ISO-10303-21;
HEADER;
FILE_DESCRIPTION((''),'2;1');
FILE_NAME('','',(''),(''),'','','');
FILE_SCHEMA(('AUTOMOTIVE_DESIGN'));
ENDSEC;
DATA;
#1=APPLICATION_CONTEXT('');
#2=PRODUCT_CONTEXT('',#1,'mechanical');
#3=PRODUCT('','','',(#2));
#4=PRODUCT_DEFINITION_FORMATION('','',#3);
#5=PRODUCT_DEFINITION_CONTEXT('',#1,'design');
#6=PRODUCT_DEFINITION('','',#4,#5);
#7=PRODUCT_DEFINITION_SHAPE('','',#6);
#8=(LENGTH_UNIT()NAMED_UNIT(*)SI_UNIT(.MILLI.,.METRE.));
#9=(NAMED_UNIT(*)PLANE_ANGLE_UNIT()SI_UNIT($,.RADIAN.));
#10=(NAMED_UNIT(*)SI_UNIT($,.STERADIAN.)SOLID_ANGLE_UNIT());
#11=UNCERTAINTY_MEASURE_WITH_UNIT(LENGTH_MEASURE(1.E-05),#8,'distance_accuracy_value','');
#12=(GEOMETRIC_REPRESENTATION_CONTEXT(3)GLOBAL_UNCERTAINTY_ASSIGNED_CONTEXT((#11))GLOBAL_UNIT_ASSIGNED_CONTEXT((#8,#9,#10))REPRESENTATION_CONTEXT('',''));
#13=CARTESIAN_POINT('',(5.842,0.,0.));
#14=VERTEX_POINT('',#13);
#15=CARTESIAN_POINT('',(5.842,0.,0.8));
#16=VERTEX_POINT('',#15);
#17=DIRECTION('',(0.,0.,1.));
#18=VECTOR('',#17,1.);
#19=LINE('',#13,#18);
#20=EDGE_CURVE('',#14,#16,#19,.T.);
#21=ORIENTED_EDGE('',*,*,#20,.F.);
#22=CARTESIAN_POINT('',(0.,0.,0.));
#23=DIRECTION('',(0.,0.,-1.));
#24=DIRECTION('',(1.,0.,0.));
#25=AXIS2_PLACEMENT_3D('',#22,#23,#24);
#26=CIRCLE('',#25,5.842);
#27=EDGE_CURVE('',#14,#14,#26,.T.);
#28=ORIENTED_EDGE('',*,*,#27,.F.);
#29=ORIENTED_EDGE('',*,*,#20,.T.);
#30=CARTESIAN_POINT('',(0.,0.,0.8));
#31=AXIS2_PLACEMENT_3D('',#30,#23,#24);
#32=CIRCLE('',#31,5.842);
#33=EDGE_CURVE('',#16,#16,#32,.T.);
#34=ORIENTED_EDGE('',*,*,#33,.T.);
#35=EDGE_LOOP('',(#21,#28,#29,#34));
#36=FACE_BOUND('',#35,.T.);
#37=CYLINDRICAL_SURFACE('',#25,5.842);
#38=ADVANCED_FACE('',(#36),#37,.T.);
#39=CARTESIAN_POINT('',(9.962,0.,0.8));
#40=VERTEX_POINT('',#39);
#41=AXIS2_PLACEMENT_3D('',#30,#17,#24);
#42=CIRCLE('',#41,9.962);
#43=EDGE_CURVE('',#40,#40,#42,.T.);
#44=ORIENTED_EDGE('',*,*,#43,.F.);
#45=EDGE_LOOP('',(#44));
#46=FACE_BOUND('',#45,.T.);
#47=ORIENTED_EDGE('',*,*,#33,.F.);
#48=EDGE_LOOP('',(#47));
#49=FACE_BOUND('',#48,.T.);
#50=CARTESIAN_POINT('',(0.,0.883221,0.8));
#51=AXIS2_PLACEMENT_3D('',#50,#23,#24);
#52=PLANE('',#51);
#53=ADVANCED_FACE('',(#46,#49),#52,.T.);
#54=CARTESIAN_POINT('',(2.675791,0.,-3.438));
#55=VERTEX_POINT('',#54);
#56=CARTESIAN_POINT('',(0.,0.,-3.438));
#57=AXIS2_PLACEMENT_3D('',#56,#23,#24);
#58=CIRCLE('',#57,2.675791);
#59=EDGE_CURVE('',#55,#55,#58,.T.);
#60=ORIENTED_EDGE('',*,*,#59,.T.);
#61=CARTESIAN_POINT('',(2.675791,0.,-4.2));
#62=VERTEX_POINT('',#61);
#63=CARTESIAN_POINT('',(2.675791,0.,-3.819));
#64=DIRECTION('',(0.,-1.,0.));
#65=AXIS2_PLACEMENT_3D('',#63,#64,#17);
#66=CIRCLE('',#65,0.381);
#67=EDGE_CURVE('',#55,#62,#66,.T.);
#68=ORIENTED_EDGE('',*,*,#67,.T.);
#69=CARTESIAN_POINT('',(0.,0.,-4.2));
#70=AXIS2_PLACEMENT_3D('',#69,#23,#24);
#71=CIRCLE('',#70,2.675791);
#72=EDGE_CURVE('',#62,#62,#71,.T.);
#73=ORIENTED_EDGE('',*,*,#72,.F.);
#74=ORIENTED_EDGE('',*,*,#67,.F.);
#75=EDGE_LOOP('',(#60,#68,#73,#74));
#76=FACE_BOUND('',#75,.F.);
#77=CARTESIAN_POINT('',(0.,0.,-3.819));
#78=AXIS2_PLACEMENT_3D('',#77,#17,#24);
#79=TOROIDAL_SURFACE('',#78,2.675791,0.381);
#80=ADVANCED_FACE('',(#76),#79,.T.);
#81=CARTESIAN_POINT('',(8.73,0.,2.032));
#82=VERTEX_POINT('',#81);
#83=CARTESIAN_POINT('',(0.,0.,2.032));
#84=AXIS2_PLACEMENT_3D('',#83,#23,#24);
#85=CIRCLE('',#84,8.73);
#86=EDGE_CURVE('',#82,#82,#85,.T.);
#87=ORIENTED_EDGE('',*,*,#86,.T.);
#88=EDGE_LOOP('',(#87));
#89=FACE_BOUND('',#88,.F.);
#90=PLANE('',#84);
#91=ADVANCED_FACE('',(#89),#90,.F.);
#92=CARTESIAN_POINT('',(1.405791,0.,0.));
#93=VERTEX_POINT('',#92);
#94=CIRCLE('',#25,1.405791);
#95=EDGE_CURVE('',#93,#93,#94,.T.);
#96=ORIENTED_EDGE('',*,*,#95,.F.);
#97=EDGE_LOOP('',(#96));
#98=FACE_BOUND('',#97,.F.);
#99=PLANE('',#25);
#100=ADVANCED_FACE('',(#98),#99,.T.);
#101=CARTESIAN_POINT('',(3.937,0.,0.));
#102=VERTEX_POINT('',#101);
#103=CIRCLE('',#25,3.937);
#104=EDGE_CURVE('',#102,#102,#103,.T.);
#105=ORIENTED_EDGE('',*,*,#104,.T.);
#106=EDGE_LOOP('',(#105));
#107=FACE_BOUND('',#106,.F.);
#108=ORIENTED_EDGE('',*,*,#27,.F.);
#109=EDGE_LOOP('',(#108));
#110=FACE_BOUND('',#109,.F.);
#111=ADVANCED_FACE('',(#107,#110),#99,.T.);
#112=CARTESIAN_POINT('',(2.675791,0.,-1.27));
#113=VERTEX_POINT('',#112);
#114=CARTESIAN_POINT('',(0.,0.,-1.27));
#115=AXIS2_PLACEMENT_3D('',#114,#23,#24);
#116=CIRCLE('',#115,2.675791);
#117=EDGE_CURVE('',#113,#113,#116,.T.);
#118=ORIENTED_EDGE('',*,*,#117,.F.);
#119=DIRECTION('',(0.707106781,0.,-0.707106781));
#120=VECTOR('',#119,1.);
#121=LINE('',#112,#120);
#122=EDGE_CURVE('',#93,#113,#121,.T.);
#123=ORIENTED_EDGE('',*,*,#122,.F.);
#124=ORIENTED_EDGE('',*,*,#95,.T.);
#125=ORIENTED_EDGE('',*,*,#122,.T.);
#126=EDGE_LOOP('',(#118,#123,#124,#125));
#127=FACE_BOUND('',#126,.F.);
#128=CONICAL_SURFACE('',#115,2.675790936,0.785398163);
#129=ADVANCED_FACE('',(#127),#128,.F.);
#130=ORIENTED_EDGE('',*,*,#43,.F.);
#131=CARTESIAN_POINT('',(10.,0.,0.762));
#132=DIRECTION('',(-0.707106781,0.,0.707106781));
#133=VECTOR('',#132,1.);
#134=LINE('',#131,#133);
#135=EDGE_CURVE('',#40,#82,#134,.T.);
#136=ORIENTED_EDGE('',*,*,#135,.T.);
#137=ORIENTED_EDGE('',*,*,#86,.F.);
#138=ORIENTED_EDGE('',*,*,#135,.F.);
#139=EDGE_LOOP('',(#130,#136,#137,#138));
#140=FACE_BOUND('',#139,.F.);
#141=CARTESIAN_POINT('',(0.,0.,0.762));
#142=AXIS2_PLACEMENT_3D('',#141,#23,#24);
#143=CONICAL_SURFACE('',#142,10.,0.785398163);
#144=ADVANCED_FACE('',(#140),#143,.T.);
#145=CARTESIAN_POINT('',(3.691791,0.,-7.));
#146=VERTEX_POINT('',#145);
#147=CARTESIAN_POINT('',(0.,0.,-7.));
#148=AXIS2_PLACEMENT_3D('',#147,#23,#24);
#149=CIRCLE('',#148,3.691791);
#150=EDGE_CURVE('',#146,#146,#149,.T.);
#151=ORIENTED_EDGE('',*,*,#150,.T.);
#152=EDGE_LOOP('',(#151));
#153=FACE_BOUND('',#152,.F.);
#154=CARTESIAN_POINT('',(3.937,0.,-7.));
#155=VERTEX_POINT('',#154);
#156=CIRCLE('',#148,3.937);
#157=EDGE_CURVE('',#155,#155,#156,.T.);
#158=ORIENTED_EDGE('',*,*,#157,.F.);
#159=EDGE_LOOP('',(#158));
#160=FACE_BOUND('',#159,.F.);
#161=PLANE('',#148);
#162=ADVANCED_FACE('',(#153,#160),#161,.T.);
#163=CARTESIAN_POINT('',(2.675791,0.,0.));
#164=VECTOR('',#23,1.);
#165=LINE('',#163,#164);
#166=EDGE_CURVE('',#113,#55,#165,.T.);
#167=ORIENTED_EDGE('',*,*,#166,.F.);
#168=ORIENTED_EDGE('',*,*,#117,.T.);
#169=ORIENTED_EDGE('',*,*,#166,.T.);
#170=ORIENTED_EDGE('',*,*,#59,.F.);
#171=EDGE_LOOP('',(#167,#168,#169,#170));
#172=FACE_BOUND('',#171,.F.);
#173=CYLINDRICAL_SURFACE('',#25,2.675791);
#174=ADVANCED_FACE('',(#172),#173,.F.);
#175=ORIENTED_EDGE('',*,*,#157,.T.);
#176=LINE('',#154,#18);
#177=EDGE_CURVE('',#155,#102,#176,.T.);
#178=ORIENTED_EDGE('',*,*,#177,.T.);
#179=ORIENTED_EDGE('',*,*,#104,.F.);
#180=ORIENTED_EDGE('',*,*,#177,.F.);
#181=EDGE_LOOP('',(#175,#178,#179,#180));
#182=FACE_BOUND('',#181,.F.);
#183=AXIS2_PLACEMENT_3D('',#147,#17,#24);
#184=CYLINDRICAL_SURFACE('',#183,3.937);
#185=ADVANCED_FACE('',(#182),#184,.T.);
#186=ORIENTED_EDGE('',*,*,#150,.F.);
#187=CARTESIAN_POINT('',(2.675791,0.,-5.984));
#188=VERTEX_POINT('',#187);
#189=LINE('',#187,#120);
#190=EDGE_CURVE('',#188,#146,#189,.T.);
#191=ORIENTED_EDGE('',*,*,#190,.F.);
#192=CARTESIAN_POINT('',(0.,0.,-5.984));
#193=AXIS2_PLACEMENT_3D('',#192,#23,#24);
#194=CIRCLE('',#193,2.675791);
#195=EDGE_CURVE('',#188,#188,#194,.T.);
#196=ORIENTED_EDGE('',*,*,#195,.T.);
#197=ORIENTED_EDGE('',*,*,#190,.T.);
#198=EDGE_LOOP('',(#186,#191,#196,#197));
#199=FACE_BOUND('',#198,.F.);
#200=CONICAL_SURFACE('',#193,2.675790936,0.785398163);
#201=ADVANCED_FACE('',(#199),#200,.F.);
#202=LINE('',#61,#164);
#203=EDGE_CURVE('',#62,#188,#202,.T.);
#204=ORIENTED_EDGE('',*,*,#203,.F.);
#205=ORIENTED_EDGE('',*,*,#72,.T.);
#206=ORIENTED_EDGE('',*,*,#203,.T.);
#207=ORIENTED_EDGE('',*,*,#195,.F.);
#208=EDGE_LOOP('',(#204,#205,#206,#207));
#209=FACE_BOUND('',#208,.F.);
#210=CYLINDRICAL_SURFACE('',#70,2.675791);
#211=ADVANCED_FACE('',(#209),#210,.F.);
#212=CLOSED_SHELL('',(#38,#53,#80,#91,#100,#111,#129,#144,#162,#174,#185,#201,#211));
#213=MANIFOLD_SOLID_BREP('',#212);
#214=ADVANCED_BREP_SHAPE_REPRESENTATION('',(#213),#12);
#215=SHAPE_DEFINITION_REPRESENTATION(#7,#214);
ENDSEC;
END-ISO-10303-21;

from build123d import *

# Parameters (mm, degrees)
F2_SIZE  = 1.27
F3_R     = 18.9556070846
F3_R_2   = 5.842
F4_DEPTH = 0.8
F5_SIZE  = 1.016


# Not quite as in the source:
# - a fillet or chamfer that OpenCascade refuses, or shapes differently, is made with other operations: its cross-section is extruded or revolved along the edge and cut away or added


with BuildPart() as f1:
    # F0 (on Front) → F1 (revolve)
    with BuildSketch(Plane.XZ):
        with BuildLine():
            Line((0, 0), (2.6757909362, 0))
            Line((2.6757909362, 0), (2.6757909362, -3.438))
            ThreePointArc((2.6757909362, -3.438), (2.2947909362, -3.819), (2.6757909362, -4.2))
            Line((2.6757909362, -4.2), (2.6757909362, -7))
            Line((2.6757909362, -7), (3.937, -7))
            Line((3.937, -7), (3.937, 0))
            Line((3.937, 0), (10, 0))
            Line((10, 0), (10, 2.032))
            Line((10, 2.032), (0, 2.032))
            Line((0, 2.032), (0, 0))
        make_face()
    revolve(axis=Axis((0, 0, 1.016), (0, 0, -1)))

    # F2
    f2_edges = [f1.edges().sort_by_distance(p)[0] for p in [
        (-2.675791, 0, 0),
    ]]
    chamfer(f2_edges, length=F2_SIZE)

    # F3 (on face) → F4 (cut)
    with BuildSketch(Plane(origin=(0, 0, 0), x_dir=(1, 0, 0), z_dir=(0, 0, -1))):
        with Locations((0, -0.8832210264)):
            Circle(F3_R)
        Circle(F3_R_2, mode=Mode.SUBTRACT)
    extrude(amount=-F4_DEPTH, mode=Mode.SUBTRACT)

    # F5
    f5_edges = [f1.edges().sort_by_distance(p)[0] for p in [
        (-2.675791, 0, -7),
    ]]
    chamfer(f5_edges, length=F5_SIZE)

    # F6: chamfer of 1.27 on 1 edges, made by hand

    # F6_s1 → F6_t2 (revolve, cut)
    with BuildSketch(Plane.XZ):
        Polygon((10, 0.762), (8.73, 2.032), (10, 2.032), align=None)
    revolve(axis=Axis((0, 0, 2.032), (0, 0, -1)), mode=Mode.SUBTRACT)


solid = f1.part
